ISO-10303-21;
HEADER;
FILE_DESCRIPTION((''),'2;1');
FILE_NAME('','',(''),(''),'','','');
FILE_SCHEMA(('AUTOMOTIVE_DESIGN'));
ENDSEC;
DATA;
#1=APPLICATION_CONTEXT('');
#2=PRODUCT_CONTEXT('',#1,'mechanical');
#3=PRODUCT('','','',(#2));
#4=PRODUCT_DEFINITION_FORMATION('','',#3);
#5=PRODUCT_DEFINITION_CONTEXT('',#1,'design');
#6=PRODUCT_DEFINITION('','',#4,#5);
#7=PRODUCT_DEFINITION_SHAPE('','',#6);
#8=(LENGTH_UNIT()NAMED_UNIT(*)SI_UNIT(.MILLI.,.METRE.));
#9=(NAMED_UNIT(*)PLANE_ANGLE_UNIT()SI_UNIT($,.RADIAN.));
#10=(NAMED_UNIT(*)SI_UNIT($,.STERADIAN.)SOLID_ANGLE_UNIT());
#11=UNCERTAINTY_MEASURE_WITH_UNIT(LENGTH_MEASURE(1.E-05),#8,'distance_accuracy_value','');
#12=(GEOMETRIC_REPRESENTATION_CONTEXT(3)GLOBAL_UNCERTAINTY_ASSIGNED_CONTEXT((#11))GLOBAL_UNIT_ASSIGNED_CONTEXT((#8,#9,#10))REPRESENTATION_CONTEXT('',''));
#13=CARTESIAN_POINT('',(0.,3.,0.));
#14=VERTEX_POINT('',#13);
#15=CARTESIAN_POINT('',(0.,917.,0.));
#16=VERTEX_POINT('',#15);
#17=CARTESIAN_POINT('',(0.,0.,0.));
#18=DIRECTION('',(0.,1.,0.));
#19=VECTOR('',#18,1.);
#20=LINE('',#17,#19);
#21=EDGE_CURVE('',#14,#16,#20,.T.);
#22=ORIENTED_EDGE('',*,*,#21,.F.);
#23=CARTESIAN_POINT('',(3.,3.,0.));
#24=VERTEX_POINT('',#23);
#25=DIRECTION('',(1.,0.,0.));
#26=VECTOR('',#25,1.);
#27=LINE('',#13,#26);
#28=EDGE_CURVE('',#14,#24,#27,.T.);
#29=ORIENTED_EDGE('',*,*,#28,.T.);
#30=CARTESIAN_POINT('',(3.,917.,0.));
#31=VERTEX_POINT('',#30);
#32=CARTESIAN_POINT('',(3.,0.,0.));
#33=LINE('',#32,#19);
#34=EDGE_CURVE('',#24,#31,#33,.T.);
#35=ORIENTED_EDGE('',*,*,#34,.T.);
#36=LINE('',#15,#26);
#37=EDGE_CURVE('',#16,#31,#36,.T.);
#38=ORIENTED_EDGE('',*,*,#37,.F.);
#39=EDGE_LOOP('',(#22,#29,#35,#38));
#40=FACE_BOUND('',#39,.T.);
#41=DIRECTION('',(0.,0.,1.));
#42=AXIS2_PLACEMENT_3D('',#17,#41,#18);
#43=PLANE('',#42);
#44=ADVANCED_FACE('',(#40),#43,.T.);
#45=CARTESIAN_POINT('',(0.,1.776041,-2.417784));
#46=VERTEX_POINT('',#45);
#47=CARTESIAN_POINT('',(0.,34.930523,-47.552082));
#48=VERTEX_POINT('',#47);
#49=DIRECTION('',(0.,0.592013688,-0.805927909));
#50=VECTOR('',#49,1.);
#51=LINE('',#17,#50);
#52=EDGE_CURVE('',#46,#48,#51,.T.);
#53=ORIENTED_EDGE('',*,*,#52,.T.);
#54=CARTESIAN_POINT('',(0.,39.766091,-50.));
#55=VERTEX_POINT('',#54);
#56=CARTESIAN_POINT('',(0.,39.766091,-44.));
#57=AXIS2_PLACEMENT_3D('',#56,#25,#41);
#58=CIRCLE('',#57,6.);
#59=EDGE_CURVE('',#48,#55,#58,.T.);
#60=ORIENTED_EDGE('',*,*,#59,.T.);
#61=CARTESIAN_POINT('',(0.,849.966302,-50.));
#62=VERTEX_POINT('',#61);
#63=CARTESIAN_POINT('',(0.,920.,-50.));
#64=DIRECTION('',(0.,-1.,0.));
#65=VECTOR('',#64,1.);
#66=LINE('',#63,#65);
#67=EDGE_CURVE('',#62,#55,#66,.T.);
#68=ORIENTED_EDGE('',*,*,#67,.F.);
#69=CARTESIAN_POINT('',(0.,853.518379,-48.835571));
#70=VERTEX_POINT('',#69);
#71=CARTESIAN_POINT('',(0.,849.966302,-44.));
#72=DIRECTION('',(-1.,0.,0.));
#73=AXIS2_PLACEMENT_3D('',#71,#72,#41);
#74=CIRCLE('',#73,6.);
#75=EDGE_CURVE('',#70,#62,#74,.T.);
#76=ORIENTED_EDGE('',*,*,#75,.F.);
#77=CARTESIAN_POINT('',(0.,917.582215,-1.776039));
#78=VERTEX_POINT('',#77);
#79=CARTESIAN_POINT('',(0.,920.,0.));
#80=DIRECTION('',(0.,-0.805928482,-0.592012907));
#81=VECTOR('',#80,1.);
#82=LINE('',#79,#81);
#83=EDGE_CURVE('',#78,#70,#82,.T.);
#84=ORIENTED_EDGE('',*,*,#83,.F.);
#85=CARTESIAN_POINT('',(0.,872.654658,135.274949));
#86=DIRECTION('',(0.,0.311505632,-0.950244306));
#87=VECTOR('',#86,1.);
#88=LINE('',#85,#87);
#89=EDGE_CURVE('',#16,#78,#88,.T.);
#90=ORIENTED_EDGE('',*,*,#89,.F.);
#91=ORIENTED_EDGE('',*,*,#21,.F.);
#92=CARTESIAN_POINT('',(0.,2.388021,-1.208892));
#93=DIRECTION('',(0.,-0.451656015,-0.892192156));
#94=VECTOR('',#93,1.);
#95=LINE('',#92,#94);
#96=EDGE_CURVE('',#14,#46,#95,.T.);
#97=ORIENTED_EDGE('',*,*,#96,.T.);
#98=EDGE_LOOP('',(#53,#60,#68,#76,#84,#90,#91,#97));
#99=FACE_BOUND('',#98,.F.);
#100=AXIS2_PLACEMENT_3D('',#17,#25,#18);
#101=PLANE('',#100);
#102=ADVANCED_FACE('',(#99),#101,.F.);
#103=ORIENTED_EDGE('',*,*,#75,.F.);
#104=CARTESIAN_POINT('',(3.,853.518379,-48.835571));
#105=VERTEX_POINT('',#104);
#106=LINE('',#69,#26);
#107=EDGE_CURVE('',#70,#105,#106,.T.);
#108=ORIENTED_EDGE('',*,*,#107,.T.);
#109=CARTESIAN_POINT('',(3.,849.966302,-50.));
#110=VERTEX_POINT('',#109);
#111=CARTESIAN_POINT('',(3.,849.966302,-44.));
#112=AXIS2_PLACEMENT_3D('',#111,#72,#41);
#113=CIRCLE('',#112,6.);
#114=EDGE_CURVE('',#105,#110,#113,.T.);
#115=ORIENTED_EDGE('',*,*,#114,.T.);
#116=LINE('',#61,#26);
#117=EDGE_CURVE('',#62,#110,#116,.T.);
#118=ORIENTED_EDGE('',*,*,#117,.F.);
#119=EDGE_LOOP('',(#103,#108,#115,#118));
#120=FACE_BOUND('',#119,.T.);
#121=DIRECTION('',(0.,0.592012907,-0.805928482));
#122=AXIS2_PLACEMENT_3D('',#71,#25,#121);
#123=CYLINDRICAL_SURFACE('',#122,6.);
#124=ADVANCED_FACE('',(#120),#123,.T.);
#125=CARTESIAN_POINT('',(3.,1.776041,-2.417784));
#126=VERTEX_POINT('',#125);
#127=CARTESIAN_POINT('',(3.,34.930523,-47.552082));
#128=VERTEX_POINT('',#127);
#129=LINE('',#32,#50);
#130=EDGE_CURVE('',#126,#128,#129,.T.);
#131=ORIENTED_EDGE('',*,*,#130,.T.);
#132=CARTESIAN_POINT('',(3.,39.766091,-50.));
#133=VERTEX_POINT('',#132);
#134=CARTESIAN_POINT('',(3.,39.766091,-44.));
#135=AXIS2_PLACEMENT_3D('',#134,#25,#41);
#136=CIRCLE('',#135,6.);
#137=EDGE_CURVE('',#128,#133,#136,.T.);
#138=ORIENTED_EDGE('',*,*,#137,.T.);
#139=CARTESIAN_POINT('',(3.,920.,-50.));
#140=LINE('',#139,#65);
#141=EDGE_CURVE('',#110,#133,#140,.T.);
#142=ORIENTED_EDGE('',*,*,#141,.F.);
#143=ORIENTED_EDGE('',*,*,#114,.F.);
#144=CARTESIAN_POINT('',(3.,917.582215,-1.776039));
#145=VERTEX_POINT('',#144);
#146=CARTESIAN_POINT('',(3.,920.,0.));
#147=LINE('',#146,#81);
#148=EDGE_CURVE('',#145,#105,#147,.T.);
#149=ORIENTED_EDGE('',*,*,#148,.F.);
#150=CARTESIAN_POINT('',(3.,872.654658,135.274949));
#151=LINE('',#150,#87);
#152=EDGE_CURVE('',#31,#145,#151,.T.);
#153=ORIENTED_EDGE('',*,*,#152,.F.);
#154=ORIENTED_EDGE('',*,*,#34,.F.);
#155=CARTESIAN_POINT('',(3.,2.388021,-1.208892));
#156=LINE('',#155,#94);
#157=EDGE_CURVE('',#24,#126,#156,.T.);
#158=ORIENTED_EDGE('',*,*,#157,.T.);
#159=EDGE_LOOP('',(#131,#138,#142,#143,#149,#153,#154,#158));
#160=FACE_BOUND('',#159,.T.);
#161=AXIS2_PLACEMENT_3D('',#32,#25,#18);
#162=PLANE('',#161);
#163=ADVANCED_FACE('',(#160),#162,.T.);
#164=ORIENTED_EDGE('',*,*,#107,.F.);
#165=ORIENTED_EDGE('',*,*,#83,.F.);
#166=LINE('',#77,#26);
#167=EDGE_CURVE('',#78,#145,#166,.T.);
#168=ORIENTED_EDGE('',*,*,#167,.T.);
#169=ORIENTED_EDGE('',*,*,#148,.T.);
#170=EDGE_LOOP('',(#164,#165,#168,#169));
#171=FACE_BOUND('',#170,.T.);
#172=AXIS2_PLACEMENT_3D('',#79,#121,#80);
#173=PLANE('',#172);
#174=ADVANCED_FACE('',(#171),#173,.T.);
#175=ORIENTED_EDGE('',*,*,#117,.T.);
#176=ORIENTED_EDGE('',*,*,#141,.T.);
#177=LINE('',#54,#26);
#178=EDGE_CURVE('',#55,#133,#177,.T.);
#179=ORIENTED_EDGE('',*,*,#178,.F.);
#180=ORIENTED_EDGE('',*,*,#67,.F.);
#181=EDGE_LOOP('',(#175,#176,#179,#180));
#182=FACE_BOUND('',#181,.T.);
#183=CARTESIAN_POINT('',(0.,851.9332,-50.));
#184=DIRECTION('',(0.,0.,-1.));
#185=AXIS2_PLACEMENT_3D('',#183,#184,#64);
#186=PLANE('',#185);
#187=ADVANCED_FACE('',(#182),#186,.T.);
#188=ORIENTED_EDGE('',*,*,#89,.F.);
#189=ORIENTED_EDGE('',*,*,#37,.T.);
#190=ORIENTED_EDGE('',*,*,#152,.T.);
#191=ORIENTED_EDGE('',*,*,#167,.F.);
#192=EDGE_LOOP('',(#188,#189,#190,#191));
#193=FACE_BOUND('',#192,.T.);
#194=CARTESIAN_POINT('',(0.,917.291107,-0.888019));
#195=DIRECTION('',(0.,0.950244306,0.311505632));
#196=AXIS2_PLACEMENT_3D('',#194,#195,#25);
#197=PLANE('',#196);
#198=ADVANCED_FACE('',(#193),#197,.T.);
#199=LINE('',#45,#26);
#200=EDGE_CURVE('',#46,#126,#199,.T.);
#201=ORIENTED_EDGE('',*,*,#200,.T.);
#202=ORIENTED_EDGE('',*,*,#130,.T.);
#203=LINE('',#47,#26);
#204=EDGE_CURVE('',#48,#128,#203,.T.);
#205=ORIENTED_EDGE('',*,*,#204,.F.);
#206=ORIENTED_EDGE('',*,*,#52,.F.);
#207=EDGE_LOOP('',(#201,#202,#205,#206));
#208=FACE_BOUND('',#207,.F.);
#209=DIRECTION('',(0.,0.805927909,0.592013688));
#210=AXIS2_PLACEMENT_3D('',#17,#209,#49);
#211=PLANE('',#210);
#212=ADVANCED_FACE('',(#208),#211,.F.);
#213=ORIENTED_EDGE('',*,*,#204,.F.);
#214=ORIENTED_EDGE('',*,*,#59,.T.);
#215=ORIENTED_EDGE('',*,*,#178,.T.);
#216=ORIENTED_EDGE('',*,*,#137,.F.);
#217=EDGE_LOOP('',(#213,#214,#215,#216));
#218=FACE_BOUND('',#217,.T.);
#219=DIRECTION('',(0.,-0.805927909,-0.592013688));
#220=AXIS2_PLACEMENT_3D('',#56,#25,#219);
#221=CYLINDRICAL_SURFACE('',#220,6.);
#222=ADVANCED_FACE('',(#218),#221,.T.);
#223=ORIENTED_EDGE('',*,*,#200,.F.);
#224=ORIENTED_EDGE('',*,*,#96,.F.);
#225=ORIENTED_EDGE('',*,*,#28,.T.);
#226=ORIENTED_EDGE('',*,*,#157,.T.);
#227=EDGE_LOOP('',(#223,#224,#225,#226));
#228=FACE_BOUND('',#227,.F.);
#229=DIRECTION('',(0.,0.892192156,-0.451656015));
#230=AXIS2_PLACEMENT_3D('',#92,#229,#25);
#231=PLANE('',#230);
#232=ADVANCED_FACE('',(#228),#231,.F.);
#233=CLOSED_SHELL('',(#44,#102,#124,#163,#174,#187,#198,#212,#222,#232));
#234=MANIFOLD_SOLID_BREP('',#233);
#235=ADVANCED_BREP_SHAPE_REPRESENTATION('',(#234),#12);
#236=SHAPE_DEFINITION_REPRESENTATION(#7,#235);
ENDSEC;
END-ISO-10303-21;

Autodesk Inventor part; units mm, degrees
ref_plane "YZ Plane" through (0, 0, 0) normal (1, 0, 0) x (0, 1, 0)
ref_plane "XZ Plane" through (0, 0, 0) normal (0, 1, 0) x (-1, 0, 0)
ref_plane "XY Plane" through (0, 0, 0) normal (0, 0, 1) x (1, 0, 0)
sketch "Sketch2" plane through (0, 0, 0) normal (1, 0, 0) x (0, 1, 0)
  line L0 (0, 0) -> (920, 0)
  line L1 (920, 0) -> (920, -50)
  line L2 (920, -50) -> (0, -50)
  line L3 (0, -50) -> (0, 0)
  line L4 (920, -50) -> (883.2713, 0) construction
  line L5 (920, 0) -> (851.9332, -50)
  line L6 (0, 0) -> (36.7287, -50)
  dimension "d28" = 920
  dimension "d29" = 50
  dimension "d31" = 36.3
  dimension "d32" = 53.7
  dimension "d36" = 53.7
extrude "Plate2" add sketch "Sketch2" along normal blind 3 contours L0 L5 L2 L6
chamfer "Corner Chamfer1" distance 3 angle 45 2 edges at (1.5, 920, 0) (1.5, 0, 0)
fillet "Corner Round1" radius 6 2 edges at (1.5, 36.7287, -50) (1.5, 851.9332, -50)
equation "\"d36\" = d32"
equation "\"d30\" = Thickness"
equation "\"BendReliefWidth\" = Thickness"
equation "\"BendReliefDepth\" = 0.5 * Thickness"
equation "\"CornerReliefSize\" = 4 * Thickness"
equation "\"MinimumRemnant\" = 2 * Thickness"
equation "\"TransitionRadius\" = BendRadius"
equation "\"JacobiRadiusSize\" = BendRadius"
equation "\"GapSize\" = Thickness"
equation "\"Thickness\" = 3"
equation "\"BendRadius\" = 5"
properties part number "MSC 0691 stringer cone" material "Stainless Steel"
